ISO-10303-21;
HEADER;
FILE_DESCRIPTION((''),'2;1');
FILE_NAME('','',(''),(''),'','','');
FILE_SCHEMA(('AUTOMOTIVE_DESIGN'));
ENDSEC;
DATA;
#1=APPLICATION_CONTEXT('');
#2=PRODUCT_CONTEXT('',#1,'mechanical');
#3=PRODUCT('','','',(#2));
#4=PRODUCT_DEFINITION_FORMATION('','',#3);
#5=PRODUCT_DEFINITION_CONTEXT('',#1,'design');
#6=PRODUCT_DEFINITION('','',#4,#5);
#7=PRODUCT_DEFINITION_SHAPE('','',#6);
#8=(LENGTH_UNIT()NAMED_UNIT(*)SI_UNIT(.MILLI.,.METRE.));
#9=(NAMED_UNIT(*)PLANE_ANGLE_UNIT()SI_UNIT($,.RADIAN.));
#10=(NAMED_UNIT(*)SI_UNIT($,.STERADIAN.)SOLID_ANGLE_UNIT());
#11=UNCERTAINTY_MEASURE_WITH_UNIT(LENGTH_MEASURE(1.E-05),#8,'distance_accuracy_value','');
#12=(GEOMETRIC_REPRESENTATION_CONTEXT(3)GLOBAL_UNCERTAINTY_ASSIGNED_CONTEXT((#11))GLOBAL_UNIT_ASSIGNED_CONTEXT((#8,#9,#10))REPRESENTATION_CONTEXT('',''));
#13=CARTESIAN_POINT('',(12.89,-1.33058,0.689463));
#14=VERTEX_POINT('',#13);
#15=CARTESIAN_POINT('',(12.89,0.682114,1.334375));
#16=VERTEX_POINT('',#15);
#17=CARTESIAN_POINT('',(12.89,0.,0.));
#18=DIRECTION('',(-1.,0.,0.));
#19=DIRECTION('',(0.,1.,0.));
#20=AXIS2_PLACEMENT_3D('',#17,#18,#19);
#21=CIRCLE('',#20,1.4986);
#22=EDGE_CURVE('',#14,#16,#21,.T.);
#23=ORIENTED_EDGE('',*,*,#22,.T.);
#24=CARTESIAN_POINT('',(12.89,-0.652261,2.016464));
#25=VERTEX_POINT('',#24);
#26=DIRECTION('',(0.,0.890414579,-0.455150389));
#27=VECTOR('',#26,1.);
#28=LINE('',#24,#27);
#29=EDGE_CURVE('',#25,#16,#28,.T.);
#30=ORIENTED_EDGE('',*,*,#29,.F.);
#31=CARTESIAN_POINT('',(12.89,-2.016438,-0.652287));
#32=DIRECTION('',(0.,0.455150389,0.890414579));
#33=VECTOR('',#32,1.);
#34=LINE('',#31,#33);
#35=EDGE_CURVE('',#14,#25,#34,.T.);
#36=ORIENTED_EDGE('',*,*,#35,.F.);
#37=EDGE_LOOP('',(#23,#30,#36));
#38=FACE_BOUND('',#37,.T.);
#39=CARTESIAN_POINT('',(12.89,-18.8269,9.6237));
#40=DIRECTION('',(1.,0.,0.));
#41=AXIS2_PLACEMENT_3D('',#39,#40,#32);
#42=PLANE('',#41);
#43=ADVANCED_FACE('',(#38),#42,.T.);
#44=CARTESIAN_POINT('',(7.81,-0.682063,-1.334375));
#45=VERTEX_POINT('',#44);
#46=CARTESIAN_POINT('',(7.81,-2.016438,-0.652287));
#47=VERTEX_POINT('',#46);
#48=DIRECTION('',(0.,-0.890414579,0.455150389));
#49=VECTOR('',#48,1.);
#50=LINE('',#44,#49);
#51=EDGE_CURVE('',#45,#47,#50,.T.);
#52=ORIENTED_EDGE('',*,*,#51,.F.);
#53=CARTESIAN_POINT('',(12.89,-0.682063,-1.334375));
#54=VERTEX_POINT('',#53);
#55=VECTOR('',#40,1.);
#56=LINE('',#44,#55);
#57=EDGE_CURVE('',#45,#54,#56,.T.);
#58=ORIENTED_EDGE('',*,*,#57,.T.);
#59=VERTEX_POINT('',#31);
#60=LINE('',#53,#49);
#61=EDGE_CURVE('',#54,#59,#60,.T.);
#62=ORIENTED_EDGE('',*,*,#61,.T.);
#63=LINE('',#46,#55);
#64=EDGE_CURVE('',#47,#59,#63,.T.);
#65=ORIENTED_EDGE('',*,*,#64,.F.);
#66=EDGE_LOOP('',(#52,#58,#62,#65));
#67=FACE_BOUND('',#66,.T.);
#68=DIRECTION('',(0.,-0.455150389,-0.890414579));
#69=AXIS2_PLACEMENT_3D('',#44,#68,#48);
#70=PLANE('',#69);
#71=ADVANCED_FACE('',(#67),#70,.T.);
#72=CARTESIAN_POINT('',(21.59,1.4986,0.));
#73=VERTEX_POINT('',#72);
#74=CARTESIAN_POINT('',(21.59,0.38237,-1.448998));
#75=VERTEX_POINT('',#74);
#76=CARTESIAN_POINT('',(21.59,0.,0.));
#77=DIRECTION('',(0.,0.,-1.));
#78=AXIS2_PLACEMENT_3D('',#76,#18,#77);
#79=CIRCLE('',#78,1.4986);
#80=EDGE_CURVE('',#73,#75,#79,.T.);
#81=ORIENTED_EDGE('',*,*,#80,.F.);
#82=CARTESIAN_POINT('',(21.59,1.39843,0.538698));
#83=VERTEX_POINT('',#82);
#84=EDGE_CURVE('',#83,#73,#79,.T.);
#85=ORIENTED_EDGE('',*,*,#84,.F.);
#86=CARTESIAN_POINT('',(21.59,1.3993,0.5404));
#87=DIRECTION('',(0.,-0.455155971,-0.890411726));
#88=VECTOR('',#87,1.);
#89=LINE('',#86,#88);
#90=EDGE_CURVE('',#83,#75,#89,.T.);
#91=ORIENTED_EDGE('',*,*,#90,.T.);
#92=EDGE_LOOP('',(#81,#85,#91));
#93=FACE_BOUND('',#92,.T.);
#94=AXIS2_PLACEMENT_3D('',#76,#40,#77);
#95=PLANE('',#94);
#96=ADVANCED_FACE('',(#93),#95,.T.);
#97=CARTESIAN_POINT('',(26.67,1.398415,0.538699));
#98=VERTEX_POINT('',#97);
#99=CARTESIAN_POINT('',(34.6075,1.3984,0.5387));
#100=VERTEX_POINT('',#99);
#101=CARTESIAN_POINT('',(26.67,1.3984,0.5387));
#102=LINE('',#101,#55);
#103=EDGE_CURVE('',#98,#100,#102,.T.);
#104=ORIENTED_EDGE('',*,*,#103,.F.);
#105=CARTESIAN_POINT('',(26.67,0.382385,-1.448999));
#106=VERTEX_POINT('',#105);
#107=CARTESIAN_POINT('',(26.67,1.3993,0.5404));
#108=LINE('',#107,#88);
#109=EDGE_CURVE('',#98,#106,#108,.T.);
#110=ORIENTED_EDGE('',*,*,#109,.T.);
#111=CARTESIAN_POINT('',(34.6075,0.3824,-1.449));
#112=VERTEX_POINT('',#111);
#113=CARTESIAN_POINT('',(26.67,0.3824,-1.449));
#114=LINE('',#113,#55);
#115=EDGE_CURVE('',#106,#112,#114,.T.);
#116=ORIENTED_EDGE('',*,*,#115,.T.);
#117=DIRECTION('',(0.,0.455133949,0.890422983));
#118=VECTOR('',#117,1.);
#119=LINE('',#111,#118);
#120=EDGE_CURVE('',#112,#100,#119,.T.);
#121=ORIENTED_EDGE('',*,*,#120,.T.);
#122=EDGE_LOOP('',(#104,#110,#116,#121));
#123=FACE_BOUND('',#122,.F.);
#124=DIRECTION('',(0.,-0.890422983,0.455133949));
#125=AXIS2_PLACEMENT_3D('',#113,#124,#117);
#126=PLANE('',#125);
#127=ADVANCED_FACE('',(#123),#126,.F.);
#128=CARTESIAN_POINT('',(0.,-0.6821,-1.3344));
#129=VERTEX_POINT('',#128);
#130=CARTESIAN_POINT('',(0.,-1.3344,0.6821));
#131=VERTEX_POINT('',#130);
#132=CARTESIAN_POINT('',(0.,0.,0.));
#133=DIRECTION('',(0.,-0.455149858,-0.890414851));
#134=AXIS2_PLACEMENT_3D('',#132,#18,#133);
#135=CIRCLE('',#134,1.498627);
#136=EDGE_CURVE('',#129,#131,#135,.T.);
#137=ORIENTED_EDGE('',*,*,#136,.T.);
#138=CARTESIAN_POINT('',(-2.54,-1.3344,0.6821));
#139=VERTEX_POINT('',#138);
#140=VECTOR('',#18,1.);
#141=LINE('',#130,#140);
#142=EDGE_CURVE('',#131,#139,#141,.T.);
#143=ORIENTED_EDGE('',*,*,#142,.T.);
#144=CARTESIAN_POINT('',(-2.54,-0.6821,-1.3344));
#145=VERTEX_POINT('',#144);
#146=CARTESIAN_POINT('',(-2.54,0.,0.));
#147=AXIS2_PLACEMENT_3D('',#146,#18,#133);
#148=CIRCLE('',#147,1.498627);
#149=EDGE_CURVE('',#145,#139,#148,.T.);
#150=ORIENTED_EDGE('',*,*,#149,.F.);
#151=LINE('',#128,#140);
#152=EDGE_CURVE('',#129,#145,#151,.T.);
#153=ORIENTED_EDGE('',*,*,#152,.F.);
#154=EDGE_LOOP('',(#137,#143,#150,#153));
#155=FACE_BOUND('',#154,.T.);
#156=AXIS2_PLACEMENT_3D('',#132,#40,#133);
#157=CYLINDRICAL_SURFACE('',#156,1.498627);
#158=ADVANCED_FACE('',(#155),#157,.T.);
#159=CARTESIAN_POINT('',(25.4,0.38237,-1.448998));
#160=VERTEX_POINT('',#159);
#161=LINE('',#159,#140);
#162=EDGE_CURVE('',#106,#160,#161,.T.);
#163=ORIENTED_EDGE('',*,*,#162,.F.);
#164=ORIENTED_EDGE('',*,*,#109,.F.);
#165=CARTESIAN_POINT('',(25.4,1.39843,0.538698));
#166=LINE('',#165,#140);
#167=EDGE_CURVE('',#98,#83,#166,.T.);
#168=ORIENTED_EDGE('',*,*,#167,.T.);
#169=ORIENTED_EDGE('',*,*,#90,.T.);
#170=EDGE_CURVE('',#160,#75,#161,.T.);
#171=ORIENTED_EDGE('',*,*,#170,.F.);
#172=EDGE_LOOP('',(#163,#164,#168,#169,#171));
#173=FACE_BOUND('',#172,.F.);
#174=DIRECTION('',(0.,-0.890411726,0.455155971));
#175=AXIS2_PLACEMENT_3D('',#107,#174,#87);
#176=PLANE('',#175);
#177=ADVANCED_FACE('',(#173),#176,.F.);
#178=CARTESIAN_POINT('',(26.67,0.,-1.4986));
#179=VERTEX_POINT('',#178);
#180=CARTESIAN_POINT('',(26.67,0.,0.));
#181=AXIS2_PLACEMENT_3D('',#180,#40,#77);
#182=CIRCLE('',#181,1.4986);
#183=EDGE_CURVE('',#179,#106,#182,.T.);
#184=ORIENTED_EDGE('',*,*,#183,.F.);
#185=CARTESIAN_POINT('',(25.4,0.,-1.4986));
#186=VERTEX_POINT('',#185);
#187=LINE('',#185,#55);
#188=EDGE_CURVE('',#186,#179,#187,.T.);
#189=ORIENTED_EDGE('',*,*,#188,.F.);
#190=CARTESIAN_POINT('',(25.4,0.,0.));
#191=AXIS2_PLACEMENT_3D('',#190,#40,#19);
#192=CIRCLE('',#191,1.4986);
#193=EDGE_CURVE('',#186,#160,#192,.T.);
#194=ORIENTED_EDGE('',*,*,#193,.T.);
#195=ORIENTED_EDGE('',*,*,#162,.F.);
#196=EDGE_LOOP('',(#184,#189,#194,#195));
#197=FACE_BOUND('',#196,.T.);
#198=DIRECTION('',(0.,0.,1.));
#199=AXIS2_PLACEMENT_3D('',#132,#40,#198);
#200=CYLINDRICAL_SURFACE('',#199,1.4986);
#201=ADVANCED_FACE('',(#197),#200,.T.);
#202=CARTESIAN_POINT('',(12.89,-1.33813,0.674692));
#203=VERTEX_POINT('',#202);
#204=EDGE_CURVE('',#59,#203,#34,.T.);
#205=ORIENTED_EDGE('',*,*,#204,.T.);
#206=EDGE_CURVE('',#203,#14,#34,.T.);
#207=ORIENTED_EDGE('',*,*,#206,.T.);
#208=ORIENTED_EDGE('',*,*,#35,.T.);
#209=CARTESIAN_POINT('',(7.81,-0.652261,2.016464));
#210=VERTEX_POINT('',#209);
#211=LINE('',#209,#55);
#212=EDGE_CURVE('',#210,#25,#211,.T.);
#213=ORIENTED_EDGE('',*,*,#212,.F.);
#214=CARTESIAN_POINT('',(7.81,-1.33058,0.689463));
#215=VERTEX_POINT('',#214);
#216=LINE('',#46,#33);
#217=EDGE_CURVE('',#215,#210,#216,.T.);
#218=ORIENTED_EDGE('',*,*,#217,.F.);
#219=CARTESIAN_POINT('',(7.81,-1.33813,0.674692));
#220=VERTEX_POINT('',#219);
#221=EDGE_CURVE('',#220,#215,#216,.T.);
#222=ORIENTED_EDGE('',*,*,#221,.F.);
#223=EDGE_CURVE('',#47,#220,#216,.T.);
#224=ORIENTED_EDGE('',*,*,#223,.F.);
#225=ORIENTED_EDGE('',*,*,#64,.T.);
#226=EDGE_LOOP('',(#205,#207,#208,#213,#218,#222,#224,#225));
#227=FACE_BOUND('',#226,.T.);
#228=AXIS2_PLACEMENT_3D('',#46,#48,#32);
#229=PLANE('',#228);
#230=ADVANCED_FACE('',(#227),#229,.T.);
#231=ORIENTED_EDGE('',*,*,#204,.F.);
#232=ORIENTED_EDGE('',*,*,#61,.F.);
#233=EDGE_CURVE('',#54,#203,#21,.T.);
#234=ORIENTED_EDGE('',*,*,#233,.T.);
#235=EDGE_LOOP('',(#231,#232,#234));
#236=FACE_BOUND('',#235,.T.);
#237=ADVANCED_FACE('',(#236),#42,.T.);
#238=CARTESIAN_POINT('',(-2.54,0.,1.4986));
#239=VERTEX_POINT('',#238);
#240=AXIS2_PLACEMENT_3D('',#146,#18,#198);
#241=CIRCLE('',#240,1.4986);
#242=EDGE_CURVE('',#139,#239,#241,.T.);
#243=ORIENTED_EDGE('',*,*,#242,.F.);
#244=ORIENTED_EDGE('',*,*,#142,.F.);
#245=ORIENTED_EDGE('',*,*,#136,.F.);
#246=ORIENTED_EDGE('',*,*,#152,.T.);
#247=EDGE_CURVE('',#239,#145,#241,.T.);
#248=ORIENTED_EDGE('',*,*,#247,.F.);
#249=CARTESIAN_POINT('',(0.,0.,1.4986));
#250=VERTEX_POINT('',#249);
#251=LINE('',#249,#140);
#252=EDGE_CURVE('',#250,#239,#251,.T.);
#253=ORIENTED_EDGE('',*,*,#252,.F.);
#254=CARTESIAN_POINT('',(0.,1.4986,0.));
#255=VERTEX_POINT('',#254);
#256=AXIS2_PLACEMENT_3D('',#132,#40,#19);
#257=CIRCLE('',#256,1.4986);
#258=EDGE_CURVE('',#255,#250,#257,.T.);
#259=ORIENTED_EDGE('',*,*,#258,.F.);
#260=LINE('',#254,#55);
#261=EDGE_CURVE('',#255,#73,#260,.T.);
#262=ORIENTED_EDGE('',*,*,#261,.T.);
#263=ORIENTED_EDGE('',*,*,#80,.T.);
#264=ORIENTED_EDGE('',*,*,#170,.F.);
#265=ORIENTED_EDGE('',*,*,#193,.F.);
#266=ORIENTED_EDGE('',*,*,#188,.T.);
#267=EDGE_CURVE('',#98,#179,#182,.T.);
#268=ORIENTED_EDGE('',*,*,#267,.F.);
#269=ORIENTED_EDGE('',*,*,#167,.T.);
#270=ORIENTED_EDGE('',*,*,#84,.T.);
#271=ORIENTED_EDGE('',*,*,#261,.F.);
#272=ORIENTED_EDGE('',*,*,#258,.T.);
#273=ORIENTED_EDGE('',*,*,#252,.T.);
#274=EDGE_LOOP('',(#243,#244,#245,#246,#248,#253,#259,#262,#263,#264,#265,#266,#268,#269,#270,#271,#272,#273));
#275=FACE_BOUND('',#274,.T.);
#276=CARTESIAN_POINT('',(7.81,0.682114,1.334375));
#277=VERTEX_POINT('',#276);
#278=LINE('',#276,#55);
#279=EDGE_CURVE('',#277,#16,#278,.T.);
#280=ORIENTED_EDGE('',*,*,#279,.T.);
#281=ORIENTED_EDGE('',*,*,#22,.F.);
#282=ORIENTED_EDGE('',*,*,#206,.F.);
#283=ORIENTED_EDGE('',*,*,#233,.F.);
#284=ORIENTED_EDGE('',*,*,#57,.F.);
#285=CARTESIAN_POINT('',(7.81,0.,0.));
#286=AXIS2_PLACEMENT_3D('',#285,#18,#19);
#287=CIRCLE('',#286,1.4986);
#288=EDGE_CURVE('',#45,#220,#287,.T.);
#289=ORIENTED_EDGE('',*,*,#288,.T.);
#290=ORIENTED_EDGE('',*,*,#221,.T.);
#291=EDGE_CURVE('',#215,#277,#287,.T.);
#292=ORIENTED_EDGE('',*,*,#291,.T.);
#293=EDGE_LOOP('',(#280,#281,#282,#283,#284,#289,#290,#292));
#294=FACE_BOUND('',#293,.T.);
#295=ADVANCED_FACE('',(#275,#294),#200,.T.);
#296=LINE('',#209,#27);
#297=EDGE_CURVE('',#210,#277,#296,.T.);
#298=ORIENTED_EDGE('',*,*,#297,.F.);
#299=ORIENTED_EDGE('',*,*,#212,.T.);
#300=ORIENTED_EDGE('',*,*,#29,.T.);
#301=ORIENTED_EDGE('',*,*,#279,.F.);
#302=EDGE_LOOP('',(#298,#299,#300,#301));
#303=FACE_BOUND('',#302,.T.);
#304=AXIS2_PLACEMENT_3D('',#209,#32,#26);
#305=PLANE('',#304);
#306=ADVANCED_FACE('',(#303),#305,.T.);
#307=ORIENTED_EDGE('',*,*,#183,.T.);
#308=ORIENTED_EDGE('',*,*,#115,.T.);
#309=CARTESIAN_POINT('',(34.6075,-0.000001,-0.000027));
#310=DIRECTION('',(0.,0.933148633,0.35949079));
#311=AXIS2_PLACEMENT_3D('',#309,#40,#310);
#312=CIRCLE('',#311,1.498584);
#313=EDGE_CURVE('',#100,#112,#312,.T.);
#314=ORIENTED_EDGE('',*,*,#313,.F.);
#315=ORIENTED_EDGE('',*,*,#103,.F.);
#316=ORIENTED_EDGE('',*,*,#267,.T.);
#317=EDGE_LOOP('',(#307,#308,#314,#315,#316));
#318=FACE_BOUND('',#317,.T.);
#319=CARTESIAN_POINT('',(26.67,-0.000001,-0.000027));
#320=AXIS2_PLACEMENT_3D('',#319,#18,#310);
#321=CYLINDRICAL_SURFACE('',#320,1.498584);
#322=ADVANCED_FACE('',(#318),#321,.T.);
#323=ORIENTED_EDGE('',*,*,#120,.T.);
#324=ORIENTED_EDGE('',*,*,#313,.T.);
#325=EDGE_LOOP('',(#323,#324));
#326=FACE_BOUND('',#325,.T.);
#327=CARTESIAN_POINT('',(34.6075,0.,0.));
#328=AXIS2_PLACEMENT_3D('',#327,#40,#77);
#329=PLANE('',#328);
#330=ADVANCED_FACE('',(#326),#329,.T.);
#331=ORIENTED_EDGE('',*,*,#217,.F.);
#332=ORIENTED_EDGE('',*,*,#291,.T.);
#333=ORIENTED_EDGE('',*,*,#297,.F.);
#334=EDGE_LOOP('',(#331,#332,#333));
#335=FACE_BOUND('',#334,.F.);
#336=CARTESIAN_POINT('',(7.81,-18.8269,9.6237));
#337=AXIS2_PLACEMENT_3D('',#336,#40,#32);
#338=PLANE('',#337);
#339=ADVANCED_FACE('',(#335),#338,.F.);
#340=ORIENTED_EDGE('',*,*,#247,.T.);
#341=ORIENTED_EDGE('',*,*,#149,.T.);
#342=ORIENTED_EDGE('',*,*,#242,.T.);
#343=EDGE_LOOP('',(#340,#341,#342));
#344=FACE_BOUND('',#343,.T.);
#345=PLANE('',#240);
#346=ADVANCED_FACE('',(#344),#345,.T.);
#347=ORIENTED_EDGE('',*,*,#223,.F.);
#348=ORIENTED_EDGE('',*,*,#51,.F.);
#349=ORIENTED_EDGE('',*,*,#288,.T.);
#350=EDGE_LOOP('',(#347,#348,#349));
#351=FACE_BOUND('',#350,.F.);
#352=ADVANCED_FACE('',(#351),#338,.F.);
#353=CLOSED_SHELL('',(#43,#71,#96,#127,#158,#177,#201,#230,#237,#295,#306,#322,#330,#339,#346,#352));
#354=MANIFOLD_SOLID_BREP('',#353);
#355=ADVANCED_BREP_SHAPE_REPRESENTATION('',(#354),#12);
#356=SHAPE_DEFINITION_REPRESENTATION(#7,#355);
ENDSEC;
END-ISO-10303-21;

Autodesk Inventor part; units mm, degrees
ref_plane "YZ Plane" through (0, 0, 0) normal (1, 0, 0) x (0, 1, 0)
ref_plane "XZ Plane" through (0, 0, 0) normal (0, 1, 0) x (-1, 0, 0)
ref_plane "XY Plane" through (0, 0, 0) normal (0, 0, 1) x (1, 0, 0)
sketch "Sketch1" plane through (0, 0, 0) normal (1, 0, 0) x (0, 1, 0)
  circle A0 centre (0, 0) radius 1.4986
  dimension "d0" = 2.9972
extrude "Extrusion1" add sketch "Sketch1" along normal blind 25.4
ref_plane "Work Plane1" through (7.81, -18.8269, 9.6237) normal (1, 0, 0) x (0, 0.4551504, 0.8904146)
sketch "Sketch2" plane through (7.81, -18.8269, 9.6237) normal (1, 0, 0) x (0, 0.4551504, 0.8904146)
  line L0 (0, -21.144) -> (-1.4986, -21.144) construction
  circle A0 centre (0, -21.144) radius 1.4986 construction
  line L1 (-1.4986, -21.144) -> (-1.4986, -19.6454)
  line L2 (-1.4986, -19.6454) -> (1.4986, -19.6454)
  line L3 (1.4986, -19.6454) -> (1.4986, -21.144)
  line L4 (-1.4986, -21.144) -> (1.4986, -21.144)
extrude "Extrusion2" add sketch "Sketch2" along normal blind 5.08
sketch "Sketch3" plane through (25.4, 0, 0) normal (1, 0, 0) x (0, 0, -1)
  circle A0 centre (0, 0) radius 1.4986
extrude "Extrusion3" add sketch "Sketch3" along normal blind 1.27
sketch "Sketch4" plane through (26.67, 0, 0) normal (1, 0, 0) x (0, 0, -1)
  line L0 (-0.5404, 1.3993) -> (1.4507, 0.3815)
  arc A0 (-10.1641, -17.4276) -> (-8.173, -18.4454) centre (-9.6237, -18.8269) ccw
  line L1 (-10.1641, -17.4276) -> (-8.173, -18.4454) projected
  line L2 (-2.0165, -0.6523) -> (-0.6821, -1.3344) projected
  arc A1 (1.4507, 0.3815) -> (-0.5404, 1.3993) centre (0, 0) ccw
extrude "Extrusion4" cut sketch "Sketch4" against normal blind 5.08 contours A1 L0
sketch "Sketch5" plane through (26.67, 0, 0) normal (1, 0, 0) x (0, 0, -1)
  line L0 (1.449, 0.3824) -> (-0.5387, 1.3984) projected
  line L1 (1.449, 0.3824) -> (-0.5387, 1.3984) projected
  arc A0 (-0.5387, 1.3984) -> (1.449, 0.3824) centre (0, 0) ccw projected
extrude "Extrusion5" add sketch "Sketch5" along normal blind 7.9375
sketch "Sketch6" plane through (0, 0, 0) normal (-1, 0, 0) x (0, 0, 1)
  arc A0 (-1.3344, -0.6821) -> (0.6821, -1.3344) centre (0, 0) ccw projected
  circle A1 centre (0, 0) radius 1.4986
extrude "Extrusion6" add sketch "Sketch6" along normal blind 2.54
properties part number "Shaft" material "PAEK Plastic"
